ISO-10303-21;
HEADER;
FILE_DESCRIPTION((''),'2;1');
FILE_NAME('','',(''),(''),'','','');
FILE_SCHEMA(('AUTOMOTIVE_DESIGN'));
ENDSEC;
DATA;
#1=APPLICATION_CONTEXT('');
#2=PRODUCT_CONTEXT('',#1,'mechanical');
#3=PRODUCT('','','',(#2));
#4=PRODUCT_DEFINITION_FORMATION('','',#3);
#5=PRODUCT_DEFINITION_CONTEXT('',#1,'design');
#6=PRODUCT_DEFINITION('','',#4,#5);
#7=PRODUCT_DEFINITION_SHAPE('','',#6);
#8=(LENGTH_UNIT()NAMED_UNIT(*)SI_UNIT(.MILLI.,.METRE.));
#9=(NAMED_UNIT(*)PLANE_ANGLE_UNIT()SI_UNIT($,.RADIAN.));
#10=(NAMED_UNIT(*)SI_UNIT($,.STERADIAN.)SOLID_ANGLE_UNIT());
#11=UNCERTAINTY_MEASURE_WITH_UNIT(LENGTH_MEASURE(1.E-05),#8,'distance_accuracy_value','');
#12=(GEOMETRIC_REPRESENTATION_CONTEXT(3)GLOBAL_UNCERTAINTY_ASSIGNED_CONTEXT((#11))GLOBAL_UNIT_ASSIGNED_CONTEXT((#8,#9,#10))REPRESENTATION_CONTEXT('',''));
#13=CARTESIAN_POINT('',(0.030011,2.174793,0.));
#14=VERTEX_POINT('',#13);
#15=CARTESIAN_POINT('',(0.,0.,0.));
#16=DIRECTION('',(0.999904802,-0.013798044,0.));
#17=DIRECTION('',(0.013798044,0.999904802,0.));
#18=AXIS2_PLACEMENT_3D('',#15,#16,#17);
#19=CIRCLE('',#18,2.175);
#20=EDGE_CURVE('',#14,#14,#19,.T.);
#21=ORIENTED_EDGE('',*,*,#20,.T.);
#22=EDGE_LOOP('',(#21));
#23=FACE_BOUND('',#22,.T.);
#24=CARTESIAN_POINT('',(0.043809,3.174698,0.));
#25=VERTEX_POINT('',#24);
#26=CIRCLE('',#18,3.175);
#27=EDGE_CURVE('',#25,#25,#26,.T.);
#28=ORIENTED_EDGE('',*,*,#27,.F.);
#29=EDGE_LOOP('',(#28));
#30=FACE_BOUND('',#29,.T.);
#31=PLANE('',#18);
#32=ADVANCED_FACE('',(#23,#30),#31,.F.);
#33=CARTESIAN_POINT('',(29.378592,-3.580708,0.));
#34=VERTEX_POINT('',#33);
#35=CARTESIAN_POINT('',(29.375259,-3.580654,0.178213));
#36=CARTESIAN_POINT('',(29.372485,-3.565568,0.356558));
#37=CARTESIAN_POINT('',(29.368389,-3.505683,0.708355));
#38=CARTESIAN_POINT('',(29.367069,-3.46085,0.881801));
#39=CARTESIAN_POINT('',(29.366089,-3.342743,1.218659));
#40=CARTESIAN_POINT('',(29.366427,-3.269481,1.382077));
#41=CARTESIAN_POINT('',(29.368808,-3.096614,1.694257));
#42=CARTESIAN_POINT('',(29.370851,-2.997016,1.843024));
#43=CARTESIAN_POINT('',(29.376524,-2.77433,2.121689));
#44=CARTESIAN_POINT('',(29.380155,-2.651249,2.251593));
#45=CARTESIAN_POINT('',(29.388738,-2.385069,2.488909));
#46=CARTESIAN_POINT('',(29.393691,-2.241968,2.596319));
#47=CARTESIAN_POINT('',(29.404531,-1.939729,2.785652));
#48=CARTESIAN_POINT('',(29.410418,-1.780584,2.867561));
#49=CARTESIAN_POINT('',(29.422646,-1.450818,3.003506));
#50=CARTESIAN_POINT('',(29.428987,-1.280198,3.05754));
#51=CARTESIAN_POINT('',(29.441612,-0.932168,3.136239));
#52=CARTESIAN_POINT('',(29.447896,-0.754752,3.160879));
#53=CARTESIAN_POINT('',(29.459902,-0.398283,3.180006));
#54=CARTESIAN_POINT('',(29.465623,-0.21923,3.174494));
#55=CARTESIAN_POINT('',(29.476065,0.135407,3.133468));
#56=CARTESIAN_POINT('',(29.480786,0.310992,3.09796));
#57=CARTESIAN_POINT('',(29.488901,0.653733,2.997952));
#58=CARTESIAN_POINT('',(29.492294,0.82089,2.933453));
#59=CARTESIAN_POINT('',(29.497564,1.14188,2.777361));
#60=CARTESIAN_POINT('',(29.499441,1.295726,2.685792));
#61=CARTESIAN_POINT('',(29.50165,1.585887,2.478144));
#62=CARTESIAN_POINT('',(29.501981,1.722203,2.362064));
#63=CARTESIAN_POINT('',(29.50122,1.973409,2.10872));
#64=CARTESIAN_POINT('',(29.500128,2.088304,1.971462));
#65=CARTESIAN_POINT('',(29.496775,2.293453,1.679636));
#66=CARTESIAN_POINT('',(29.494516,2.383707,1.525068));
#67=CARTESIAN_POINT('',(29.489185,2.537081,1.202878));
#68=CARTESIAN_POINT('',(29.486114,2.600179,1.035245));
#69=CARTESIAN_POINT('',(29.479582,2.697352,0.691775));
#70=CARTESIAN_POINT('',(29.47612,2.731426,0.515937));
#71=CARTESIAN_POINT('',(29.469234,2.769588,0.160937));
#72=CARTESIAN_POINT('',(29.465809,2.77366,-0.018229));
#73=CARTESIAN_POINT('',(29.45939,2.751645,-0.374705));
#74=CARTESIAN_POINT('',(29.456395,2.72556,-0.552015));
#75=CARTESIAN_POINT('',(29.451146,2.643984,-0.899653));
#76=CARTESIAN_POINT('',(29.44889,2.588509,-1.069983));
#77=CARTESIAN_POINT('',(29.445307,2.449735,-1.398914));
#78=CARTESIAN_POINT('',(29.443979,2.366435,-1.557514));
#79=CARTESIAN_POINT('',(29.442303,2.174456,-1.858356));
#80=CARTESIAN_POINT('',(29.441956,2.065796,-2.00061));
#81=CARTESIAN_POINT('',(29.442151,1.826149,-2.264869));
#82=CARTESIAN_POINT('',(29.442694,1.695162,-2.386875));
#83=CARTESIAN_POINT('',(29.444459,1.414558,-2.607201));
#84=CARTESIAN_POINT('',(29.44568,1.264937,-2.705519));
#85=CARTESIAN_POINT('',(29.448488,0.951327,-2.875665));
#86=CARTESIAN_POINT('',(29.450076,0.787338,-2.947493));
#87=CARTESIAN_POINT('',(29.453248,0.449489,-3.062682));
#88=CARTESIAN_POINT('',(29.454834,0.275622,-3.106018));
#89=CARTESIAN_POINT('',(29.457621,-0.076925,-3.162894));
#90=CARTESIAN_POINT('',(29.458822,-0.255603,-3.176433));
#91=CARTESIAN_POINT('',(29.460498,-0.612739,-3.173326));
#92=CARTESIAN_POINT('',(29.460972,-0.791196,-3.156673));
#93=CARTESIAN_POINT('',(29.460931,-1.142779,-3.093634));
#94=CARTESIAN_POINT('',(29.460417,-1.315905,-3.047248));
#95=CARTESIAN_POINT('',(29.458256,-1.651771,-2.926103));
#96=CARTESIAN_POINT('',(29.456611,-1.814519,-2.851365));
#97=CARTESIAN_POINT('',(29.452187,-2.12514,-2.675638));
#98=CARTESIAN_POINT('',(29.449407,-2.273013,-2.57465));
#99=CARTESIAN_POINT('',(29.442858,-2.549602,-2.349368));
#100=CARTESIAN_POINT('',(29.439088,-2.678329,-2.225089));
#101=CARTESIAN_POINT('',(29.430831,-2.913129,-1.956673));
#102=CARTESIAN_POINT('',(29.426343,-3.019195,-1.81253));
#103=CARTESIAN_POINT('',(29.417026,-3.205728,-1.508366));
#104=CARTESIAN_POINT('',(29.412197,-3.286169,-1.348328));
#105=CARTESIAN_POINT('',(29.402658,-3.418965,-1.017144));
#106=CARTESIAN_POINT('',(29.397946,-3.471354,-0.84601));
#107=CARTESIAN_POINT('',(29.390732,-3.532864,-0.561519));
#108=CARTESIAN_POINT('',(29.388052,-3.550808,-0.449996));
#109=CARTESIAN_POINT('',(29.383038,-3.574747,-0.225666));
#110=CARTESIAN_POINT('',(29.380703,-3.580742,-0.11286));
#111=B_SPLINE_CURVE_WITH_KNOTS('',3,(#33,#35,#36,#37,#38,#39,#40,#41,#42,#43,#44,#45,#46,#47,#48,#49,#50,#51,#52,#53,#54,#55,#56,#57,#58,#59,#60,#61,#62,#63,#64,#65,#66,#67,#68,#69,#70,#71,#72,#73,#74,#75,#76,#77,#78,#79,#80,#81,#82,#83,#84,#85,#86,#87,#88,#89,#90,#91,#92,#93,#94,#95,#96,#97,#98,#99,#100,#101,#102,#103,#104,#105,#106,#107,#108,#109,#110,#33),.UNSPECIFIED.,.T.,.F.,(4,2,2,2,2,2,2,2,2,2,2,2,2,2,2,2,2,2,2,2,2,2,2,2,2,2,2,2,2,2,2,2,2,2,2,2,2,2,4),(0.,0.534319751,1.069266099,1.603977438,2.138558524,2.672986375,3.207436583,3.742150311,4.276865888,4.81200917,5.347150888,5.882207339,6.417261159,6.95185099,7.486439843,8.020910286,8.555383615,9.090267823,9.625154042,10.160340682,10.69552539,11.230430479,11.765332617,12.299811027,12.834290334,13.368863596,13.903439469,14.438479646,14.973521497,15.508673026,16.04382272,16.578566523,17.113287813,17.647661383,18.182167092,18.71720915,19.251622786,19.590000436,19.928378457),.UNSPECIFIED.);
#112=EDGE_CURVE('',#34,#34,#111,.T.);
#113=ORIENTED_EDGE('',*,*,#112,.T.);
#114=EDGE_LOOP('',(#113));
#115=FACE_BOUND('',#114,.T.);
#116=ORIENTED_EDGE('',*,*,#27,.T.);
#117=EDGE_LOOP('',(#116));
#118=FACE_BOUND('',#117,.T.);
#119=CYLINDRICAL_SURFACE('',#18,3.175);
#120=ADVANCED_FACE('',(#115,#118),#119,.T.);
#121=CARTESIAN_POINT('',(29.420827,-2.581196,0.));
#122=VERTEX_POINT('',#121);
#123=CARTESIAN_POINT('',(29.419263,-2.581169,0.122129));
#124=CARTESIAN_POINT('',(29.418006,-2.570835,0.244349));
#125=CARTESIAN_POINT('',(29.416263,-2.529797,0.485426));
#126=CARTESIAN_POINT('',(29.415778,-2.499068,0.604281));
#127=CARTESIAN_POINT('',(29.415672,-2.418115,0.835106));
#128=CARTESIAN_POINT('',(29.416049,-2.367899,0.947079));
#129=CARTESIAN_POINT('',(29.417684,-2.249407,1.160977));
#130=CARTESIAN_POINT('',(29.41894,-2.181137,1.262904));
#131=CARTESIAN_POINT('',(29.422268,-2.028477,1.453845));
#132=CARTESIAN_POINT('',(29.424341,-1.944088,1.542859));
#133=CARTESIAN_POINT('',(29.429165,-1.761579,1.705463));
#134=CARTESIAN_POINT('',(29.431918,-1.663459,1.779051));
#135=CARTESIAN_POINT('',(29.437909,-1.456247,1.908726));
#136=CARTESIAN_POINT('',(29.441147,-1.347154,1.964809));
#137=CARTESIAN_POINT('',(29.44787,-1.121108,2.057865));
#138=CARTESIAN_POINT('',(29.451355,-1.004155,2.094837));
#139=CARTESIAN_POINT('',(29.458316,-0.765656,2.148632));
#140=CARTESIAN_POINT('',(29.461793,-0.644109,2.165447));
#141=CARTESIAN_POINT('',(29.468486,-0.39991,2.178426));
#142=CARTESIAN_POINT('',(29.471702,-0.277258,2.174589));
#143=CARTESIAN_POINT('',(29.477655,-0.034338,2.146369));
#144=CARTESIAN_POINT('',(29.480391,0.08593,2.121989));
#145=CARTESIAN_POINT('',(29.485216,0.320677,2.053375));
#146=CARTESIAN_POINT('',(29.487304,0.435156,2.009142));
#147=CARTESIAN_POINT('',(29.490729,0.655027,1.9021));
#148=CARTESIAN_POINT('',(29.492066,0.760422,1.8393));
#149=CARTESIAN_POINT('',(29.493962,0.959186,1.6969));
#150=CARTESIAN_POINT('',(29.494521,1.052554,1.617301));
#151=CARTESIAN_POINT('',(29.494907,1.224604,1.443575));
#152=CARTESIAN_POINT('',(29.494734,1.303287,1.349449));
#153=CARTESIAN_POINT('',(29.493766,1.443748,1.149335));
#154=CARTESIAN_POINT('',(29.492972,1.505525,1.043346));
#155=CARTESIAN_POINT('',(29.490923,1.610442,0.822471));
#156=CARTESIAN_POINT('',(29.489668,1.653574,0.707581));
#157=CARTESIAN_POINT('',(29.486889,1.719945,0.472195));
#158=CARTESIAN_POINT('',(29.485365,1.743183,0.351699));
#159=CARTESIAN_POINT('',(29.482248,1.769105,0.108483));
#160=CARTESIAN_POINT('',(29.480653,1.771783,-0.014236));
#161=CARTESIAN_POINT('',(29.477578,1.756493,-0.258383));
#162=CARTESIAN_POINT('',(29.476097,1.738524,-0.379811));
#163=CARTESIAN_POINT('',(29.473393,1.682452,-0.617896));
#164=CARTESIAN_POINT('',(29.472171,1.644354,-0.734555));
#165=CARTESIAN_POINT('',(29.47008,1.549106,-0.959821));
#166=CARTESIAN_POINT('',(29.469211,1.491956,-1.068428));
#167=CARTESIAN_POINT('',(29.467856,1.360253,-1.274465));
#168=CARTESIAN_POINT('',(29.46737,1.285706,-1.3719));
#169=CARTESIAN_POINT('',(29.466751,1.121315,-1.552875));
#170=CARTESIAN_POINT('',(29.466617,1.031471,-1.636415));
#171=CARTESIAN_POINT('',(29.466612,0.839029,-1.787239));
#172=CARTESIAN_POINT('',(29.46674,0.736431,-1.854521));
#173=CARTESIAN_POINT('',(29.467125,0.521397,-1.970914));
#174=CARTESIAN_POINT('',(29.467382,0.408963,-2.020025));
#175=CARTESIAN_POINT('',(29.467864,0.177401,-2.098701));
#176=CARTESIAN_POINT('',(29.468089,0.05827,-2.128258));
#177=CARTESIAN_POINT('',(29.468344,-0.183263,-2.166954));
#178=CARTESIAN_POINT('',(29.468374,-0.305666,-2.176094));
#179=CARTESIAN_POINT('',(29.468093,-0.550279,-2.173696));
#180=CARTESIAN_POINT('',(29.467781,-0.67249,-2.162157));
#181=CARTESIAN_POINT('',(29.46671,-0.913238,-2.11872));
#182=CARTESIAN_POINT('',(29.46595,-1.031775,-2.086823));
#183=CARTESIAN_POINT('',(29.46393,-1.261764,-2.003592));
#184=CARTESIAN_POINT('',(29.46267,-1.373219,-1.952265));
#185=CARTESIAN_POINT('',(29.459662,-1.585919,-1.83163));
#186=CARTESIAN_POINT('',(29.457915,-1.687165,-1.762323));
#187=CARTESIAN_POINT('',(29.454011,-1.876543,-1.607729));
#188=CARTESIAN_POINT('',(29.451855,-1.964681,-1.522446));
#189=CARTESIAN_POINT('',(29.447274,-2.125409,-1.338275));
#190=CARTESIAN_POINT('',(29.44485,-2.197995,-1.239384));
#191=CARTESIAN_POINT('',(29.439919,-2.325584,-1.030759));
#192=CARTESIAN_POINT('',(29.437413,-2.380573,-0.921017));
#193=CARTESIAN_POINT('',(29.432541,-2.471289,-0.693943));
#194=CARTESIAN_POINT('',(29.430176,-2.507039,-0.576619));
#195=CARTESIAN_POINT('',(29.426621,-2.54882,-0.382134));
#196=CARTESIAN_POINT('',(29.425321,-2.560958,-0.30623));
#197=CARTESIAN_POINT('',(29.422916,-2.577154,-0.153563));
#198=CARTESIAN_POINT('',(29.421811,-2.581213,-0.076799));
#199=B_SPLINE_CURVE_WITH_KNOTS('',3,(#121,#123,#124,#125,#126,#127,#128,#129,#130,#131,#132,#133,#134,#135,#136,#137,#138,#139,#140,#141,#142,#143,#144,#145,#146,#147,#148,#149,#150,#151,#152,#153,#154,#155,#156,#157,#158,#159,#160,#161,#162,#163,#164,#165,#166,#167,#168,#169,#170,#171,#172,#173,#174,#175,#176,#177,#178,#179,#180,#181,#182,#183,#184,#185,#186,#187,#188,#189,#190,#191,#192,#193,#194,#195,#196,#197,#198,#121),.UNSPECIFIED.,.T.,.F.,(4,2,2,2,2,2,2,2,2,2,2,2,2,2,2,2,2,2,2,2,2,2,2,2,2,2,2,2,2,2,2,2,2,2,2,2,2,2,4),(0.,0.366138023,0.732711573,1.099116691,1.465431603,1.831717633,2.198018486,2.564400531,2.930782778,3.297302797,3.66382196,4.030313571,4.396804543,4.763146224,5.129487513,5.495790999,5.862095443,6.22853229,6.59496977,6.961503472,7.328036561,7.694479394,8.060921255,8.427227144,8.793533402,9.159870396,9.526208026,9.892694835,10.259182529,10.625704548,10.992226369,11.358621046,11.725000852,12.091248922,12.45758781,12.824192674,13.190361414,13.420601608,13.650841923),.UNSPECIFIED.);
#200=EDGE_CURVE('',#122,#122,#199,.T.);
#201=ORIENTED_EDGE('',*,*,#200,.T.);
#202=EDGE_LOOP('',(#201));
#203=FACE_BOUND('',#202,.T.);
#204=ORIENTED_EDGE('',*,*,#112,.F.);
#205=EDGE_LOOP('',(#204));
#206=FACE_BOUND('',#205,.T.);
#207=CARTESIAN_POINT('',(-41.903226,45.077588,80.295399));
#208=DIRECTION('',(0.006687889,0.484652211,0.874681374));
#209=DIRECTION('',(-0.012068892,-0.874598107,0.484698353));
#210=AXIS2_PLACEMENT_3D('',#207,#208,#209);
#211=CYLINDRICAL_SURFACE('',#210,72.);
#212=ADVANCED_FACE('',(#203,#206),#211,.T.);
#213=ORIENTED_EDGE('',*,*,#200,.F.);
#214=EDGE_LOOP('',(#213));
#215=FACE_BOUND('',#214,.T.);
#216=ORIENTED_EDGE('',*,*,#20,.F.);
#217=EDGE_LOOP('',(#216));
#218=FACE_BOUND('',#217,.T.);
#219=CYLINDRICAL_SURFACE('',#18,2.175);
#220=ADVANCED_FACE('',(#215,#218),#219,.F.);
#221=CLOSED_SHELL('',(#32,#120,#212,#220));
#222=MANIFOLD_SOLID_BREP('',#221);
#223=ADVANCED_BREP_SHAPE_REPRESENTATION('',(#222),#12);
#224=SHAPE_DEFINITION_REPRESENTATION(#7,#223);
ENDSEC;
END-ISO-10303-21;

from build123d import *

# Parameters (mm, degrees)
SWEEP_SOTTILE1_PROFILE_R   = 3.175
SWEEP_SOTTILE1_PROFILE_R_2 = 2.175
BOSS_EXTRUDE1_OUTLINE_R    = 3.175
BOSS_EXTRUDE1_OUTLINE_R_2  = 2.175
BOSS_EXTRUDE1_DEPTH        = 14.238780227
BOSS_EXTRUDE1_START        = -4
BOSS_EXTRUDE1_2_DEPTH      = 8


with BuildPart() as part:
    # Sweep-Sottile1: sweep along a path in Schizzo1
    with BuildLine(Plane.XY) as sweep_sottile1_path:
        Line((0, 0), (15.23854919, -0.210282187))
    # Sweep-Sottile1 profile (on start of the path) → Sweep-Sottile1 (sweep)
    with BuildSketch(Plane(origin=(0, 0, 0), x_dir=(0.013798043774195348, 0.9999048024627172, 0), z_dir=(0.9999048024627172, -0.013798043774195348, 0))):
        Circle(SWEEP_SOTTILE1_PROFILE_R)
        Circle(SWEEP_SOTTILE1_PROFILE_R_2, mode=Mode.SUBTRACT)
    sweep(path=sweep_sottile1_path.line)

    # Boss-Extrude1: read off the stored shape, not the designer's step
    # Boss-Extrude1 outline → Boss-Extrude1 (add)
    with BuildSketch(Plane(origin=(15.23854919, -0.210282187, 0), x_dir=(-0.013798043774230273, -0.9999048024627166, 0), z_dir=(0.9999048024627166, -0.013798043774230273, 0))):
        Circle(BOSS_EXTRUDE1_OUTLINE_R)
        Circle(BOSS_EXTRUDE1_OUTLINE_R_2, mode=Mode.SUBTRACT)
    extrude(amount=BOSS_EXTRUDE1_DEPTH)

    # Boss-Extrude1 2 outline → Boss-Extrude1 2 (cut)
    with BuildSketch(Plane(origin=(0, 0, 0), x_dir=(0.9999776358196223, -0.0032413727320758433, -0.005849902854796434), z_dir=(0.006687889098871204, 0.48465221140979525, 0.8746813740528584)).offset(BOSS_EXTRUDE1_START)):
        with BuildLine():
            ThreePointArc((29.476633089, -0.355783952), (29.439947675, -1.943650915), (29.36824562, -3.530322313))
            Line((29.36824562, -3.530322313), (29.285578099, -5))
            Line((29.285578099, -5), (29.420577266, -5))
            Line((29.420577266, -5), (29.438313552, -3.530552917))
            Line((29.438313552, -3.530552917), (29.476633089, -0.355783952))
        make_face()
        with BuildLine():
            ThreePointArc((29.444899899, 2.8204373), (29.47828405, 1.23250169), (29.476633089, -0.355783952))
            Line((29.476633089, -0.355783952), (29.514952729, 2.818984581))
            Line((29.514952729, 2.818984581), (29.529207633, 4))
            Line((29.529207633, 4), (29.40708136, 4))
            Line((29.40708136, 4), (29.444899899, 2.8204373))
        make_face()
    extrude(amount=BOSS_EXTRUDE1_2_DEPTH, mode=Mode.SUBTRACT)


solid = part.part
